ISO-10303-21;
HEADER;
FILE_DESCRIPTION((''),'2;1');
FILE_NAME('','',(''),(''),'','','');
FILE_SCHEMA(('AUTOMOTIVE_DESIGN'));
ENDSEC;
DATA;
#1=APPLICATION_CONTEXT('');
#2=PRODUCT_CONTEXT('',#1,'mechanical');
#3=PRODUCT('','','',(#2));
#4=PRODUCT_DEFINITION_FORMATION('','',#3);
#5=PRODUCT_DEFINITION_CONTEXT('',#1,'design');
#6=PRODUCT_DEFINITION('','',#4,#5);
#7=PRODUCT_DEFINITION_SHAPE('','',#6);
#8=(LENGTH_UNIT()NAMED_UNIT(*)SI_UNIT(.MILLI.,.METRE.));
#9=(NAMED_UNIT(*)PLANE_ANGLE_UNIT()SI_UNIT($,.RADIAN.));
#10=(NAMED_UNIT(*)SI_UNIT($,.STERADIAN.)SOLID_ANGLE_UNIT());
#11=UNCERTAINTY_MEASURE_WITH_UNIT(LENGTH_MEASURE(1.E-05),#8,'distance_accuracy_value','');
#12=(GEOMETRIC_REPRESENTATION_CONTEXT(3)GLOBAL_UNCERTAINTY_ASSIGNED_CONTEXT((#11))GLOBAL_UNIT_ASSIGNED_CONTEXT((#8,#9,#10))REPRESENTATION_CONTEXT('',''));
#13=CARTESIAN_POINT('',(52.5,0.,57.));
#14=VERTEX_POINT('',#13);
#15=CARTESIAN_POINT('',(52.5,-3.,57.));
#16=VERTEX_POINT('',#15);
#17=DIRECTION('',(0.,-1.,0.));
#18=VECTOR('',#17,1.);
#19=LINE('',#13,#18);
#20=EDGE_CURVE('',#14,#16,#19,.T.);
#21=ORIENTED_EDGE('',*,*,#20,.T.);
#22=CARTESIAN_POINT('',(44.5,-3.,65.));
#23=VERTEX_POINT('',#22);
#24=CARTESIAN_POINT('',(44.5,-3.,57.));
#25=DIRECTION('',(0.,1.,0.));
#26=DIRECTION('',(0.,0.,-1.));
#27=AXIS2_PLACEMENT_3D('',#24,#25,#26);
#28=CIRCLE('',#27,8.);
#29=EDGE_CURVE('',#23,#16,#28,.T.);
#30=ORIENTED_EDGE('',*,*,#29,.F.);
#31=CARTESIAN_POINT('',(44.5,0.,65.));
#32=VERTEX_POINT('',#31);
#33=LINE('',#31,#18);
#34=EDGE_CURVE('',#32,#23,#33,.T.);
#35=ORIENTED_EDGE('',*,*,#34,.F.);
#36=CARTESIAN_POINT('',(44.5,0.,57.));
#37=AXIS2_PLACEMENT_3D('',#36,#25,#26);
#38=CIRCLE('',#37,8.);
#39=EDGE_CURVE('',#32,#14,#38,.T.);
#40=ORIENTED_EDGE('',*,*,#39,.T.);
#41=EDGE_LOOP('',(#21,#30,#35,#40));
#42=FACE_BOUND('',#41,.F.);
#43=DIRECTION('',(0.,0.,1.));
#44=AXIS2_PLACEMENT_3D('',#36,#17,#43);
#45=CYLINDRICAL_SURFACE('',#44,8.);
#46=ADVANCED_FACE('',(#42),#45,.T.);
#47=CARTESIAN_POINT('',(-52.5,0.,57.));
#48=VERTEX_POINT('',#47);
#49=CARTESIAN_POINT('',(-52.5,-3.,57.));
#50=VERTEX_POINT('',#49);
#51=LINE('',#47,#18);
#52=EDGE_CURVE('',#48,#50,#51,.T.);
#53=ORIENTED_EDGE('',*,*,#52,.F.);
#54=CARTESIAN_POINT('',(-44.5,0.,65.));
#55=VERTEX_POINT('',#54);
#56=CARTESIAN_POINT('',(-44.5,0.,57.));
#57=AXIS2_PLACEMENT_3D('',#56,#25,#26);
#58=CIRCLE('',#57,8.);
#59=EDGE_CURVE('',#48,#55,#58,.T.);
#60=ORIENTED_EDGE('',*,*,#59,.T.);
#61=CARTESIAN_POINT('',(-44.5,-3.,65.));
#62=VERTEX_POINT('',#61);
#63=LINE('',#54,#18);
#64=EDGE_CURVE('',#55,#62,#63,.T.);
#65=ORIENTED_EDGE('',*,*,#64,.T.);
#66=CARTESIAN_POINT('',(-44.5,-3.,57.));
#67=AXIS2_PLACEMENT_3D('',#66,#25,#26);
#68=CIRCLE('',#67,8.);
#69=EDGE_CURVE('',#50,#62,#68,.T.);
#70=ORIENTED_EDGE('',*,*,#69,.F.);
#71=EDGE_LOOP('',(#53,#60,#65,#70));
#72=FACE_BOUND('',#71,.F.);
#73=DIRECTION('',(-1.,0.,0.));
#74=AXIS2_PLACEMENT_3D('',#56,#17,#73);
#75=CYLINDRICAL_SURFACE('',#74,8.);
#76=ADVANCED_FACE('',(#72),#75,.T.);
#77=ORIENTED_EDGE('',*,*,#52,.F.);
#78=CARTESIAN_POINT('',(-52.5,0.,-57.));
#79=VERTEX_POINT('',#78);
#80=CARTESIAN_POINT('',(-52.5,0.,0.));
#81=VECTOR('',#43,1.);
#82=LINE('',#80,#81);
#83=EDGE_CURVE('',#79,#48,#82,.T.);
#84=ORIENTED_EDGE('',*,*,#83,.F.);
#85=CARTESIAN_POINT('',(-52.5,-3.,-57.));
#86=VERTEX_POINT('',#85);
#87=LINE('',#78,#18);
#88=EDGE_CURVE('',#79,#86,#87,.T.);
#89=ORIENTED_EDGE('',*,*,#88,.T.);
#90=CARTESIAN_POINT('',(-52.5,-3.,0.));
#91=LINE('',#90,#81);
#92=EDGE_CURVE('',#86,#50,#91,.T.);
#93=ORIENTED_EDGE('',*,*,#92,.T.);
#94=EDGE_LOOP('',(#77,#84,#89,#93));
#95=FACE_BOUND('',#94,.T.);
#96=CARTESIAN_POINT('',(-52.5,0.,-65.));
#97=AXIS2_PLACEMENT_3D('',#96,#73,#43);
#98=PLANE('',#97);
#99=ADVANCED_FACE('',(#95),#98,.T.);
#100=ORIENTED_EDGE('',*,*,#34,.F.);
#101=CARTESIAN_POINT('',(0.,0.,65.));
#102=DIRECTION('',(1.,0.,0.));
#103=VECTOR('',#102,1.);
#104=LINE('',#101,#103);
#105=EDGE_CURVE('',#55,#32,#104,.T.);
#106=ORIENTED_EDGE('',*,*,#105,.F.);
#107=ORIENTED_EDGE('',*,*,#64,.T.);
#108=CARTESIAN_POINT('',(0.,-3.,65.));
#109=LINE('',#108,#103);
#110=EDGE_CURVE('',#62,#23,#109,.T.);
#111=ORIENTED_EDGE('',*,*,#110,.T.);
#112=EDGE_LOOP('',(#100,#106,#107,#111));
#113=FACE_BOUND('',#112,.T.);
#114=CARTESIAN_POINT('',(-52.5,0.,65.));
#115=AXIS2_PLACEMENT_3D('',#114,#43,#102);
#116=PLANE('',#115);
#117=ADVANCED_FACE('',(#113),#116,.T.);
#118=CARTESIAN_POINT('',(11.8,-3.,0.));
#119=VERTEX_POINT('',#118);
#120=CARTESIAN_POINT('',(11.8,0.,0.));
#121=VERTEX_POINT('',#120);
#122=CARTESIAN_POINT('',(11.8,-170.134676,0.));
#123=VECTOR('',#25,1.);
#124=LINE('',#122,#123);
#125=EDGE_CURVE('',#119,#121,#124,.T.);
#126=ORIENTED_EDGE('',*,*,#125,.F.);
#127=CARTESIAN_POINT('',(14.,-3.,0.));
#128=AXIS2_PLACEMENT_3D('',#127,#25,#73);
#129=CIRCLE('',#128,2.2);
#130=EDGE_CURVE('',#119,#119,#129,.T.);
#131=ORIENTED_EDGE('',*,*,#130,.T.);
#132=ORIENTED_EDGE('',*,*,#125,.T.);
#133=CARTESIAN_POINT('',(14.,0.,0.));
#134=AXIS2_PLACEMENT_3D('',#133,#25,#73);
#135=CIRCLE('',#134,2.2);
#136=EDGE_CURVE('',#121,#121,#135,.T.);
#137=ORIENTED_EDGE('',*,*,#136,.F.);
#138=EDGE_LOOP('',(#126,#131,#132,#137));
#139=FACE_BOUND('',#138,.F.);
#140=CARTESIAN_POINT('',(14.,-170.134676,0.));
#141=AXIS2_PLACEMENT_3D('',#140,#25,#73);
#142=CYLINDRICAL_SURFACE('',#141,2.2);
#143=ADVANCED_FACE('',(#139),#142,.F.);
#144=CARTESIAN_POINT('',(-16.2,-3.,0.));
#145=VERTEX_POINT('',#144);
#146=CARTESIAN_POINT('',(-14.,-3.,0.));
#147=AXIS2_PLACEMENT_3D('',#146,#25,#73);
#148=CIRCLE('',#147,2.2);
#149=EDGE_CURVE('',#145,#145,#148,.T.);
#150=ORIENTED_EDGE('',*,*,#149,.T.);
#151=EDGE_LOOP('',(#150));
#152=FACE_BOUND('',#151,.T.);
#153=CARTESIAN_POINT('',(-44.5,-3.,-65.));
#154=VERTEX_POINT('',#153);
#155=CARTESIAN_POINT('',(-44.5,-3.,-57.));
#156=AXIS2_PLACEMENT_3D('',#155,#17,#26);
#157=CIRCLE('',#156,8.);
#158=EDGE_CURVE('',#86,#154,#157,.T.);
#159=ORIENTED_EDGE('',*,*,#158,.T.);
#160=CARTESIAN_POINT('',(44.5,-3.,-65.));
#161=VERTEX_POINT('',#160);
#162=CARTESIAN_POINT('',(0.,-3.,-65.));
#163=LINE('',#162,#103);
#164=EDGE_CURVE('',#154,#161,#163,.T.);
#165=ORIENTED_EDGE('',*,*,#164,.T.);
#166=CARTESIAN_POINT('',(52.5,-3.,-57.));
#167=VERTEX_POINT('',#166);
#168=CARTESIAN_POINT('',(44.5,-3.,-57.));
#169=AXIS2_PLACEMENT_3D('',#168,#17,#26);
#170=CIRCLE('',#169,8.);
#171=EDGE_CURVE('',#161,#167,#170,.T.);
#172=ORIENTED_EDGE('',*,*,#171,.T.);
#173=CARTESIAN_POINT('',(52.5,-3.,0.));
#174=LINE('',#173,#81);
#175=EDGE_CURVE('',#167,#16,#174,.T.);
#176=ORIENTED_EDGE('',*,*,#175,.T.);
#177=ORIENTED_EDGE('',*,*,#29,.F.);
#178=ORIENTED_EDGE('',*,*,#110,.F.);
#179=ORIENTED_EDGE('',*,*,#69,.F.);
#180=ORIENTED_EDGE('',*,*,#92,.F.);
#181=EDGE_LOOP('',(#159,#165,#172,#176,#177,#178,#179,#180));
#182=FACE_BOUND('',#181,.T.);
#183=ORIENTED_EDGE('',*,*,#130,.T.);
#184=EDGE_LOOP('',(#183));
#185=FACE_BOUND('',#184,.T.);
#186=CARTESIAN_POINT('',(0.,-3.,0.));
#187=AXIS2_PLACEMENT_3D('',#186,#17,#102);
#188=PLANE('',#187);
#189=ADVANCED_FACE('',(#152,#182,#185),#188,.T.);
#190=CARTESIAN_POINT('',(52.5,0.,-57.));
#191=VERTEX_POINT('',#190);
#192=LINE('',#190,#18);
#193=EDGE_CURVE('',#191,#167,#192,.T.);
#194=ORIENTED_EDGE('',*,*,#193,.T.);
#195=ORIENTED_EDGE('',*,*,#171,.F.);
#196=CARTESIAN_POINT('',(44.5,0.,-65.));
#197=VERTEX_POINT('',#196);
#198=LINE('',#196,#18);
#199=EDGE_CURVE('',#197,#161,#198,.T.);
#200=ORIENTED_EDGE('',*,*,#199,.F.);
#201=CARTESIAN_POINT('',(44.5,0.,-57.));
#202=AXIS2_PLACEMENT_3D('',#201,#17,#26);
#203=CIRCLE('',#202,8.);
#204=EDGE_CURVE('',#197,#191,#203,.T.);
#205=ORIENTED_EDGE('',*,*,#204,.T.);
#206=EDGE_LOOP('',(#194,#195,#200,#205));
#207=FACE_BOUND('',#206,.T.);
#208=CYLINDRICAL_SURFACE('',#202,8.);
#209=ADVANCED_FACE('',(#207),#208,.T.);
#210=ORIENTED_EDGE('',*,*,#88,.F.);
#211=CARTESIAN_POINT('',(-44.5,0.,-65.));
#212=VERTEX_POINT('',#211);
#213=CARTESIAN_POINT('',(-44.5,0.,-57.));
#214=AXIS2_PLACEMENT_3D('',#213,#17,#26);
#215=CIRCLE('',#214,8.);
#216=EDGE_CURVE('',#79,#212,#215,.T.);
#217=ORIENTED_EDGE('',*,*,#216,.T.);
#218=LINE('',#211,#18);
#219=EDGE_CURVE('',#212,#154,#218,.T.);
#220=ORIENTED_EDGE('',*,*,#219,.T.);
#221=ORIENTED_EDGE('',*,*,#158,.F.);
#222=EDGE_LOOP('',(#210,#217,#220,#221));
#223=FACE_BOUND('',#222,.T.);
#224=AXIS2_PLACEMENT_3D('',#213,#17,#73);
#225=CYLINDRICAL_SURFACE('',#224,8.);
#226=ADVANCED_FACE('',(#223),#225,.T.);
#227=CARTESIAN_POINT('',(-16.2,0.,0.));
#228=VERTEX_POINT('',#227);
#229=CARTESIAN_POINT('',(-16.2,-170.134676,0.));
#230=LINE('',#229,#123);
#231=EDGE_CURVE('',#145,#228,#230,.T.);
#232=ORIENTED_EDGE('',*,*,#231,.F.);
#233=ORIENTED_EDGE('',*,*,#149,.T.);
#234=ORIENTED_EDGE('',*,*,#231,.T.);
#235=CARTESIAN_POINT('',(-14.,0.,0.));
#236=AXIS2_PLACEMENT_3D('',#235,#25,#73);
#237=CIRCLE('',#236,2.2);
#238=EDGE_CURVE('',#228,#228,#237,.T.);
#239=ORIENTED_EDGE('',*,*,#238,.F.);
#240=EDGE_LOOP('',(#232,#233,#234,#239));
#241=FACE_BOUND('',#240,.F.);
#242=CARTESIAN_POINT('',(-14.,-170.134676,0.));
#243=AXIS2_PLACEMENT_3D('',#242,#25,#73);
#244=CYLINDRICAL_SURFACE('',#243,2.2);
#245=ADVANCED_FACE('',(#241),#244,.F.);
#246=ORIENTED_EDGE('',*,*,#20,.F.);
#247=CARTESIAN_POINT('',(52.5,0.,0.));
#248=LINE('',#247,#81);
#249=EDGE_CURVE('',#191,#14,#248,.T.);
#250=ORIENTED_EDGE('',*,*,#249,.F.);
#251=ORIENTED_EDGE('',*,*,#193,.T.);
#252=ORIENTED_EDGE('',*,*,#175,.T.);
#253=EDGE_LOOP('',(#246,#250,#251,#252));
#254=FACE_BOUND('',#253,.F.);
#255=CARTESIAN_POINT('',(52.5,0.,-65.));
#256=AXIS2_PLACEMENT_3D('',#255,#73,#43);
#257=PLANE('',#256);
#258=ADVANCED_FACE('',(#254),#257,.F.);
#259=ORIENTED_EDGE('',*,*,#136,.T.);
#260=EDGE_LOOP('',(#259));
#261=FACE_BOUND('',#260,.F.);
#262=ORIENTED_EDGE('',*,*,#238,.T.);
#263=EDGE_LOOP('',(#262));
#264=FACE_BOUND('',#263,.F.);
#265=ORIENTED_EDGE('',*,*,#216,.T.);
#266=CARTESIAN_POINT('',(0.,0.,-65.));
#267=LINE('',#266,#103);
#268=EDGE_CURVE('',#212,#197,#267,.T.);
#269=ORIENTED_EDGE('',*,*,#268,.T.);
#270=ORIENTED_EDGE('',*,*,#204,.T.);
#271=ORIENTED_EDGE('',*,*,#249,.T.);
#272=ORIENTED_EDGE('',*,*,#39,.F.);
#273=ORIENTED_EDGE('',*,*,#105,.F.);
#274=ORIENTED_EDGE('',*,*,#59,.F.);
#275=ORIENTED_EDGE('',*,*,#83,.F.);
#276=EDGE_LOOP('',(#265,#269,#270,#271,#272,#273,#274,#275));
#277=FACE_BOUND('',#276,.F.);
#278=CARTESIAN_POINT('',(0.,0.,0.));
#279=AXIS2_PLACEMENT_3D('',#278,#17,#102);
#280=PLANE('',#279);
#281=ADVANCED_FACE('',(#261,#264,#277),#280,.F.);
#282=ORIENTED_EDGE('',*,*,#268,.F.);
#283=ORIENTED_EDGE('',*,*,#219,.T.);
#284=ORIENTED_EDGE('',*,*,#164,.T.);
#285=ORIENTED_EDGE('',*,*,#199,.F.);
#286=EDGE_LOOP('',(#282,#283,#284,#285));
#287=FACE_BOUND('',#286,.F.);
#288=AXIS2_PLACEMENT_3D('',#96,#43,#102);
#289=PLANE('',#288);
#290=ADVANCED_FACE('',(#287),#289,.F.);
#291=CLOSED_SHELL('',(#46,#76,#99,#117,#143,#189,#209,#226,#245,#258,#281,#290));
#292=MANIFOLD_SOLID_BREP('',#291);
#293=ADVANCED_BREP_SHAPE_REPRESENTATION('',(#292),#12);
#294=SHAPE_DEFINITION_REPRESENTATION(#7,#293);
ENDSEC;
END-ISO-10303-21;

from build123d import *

# Parameters (mm, degrees)
F0_W     = 105
F0_H     = 130
F1_DEPTH = 3
F3_D     = 4.4
F4_R     = 8


with BuildPart() as f1:
    # F0 (on Front) → F1 (new body)
    with BuildSketch(Plane.XZ):
        Rectangle(F0_W, F0_H)
    extrude(amount=F1_DEPTH)

    # F3 (through all)
    with Locations(Plane.XZ.offset(3)):
        with Locations((-14, 0), (14, 0)):
            Hole(F3_D / 2)

    # F4
    f4_edges = [f1.edges().sort_by_distance(p)[0] for p in [
        (52.5, -1.5, 65),
        (-52.5, -1.5, 65),
        (-52.5, -1.5, -65),
        (52.5, -1.5, -65),
    ]]
    fillet(f4_edges, radius=F4_R)


solid = f1.part
